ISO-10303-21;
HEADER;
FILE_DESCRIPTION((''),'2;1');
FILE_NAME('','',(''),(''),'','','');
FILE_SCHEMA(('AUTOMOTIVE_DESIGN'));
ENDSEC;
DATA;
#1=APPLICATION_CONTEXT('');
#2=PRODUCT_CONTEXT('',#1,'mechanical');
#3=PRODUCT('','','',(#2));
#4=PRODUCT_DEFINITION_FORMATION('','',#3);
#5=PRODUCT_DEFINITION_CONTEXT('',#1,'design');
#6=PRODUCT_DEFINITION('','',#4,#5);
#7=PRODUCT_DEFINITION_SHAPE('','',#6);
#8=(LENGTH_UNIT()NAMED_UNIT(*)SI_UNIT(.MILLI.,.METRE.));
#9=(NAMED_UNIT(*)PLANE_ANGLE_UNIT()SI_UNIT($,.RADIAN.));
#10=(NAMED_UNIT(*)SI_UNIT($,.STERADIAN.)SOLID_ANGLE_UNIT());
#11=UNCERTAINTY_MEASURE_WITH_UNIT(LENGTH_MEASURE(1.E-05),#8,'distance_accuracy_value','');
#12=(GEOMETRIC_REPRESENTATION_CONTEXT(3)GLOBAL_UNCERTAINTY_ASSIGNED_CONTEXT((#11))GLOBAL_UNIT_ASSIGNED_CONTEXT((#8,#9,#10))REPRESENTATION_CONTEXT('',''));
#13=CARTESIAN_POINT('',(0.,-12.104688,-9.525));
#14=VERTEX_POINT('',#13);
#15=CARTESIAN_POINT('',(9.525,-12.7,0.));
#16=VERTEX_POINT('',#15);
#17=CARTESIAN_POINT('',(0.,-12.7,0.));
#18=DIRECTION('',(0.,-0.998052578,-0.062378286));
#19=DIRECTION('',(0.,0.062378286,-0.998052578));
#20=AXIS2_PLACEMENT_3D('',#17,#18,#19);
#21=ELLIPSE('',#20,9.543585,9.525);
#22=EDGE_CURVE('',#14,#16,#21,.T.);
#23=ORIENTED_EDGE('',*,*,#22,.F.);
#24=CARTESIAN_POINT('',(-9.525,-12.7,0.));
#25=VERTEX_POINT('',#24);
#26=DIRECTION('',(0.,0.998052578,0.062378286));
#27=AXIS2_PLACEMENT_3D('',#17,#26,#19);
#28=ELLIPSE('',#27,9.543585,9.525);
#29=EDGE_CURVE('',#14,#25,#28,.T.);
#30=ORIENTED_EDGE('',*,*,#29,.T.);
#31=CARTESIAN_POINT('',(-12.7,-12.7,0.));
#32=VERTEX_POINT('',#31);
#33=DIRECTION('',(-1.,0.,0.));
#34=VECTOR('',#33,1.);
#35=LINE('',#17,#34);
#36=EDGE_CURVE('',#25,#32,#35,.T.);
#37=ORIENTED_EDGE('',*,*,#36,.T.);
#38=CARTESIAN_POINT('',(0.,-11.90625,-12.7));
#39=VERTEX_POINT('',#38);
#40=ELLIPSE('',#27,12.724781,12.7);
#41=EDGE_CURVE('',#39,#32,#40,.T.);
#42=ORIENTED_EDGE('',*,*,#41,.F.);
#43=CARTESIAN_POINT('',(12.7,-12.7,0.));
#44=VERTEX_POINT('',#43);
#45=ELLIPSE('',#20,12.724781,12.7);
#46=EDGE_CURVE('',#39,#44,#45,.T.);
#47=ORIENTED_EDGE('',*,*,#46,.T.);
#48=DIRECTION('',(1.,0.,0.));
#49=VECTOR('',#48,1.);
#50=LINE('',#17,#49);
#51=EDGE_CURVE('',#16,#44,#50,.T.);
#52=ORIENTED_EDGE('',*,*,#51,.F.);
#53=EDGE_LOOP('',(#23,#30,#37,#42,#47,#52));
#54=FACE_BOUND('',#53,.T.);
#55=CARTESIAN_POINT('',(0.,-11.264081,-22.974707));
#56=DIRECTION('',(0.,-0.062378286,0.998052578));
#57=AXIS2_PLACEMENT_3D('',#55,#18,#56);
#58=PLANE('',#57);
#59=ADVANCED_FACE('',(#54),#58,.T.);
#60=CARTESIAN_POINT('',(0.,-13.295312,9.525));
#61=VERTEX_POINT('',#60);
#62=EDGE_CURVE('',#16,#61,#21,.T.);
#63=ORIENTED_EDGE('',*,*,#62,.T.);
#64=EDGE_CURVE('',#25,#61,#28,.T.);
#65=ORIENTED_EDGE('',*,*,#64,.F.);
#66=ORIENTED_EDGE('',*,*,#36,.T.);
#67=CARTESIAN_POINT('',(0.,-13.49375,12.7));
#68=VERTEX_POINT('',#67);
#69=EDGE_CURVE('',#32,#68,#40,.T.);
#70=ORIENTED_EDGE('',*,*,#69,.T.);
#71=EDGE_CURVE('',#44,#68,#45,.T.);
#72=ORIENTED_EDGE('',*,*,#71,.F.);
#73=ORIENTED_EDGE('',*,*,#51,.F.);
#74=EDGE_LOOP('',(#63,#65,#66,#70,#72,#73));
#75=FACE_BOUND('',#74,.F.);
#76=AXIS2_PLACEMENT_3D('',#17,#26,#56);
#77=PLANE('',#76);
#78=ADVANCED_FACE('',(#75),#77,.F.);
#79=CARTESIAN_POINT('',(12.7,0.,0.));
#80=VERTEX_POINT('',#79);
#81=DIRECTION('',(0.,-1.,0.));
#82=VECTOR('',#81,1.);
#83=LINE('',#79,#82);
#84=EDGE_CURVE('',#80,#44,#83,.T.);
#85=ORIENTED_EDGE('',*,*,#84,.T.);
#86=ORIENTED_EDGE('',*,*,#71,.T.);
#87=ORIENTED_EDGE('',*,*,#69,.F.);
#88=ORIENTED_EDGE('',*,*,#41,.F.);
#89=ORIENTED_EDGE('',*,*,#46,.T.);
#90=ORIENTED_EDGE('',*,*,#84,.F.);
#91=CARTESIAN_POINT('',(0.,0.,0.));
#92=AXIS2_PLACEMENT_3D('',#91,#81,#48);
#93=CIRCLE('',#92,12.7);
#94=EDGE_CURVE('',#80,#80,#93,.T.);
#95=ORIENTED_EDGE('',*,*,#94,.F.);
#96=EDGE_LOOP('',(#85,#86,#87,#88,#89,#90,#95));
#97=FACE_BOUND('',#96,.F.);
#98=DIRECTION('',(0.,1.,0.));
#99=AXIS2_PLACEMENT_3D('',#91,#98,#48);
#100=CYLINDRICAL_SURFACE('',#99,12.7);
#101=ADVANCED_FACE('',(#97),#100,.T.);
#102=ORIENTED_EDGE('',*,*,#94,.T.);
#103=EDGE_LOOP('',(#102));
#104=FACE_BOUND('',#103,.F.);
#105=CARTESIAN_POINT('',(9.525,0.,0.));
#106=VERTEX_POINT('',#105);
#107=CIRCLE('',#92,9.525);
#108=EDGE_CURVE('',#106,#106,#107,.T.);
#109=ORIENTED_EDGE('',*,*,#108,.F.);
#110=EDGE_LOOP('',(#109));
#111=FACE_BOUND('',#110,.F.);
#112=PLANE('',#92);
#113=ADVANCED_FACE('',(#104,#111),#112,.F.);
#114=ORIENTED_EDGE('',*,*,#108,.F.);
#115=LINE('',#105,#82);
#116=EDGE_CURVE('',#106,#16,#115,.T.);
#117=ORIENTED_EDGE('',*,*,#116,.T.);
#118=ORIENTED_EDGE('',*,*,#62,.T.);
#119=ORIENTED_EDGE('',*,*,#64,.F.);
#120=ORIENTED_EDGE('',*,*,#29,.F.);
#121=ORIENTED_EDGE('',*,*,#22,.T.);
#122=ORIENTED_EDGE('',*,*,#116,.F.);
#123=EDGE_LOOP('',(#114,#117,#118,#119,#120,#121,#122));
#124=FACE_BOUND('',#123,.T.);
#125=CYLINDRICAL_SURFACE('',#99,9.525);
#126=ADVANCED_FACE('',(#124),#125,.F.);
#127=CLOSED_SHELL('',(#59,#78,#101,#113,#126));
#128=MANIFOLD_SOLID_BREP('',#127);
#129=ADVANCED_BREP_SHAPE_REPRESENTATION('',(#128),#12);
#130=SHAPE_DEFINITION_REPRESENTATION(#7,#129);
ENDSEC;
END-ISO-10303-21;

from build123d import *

# Parameters (mm, degrees)
F0_R     = 12.7
F0_R_2   = 9.525
F1_DEPTH = 50.8
F3_DEPTH = 25.4
F4_DEPTH = 25.4


# Not quite as in the source:
# - a feature names something its author has since deleted; it is built from what else it names


with BuildPart() as f1:
    # F0 (on Front) → F1 (new body)
    with BuildSketch(Plane.XZ):
        Circle(F0_R)
        Circle(F0_R_2, mode=Mode.SUBTRACT)
    extrude(amount=F1_DEPTH)

    # F2 (on Right) → F3 (cut)
    with BuildSketch(Plane.YZ):
        Polygon((-36.6640808118, -22.974707012), (-38.1, 0), (-41.275, 50.8), (-42.5002469476, 70.4039511617), (-59.3533739448, 70.4039511617), (-59.3533739448, -22.974707012), align=None)
        Polygon((-38.1, 0), (-12.7, 0), (-15.875, 50.8), (-41.275, 50.8), align=None)
        Polygon((-11.2640808118, -22.974707012), (-12.7, 0), (-38.1, 0), (-36.6640808118, -22.974707012), align=None)
    extrude(amount=-F3_DEPTH, mode=Mode.SUBTRACT)

    # F2 (on Right) → F4 (cut)
    with BuildSketch(Plane.YZ):
        Polygon((-36.6640808118, -22.974707012), (-38.1, 0), (-41.275, 50.8), (-42.5002469476, 70.4039511617), (-59.3533739448, 70.4039511617), (-59.3533739448, -22.974707012), align=None)
        Polygon((-38.1, 0), (-12.7, 0), (-15.875, 50.8), (-41.275, 50.8), align=None)
        Polygon((-11.2640808118, -22.974707012), (-12.7, 0), (-38.1, 0), (-36.6640808118, -22.974707012), align=None)
    extrude(amount=F4_DEPTH, mode=Mode.SUBTRACT)


solid = f1.part
